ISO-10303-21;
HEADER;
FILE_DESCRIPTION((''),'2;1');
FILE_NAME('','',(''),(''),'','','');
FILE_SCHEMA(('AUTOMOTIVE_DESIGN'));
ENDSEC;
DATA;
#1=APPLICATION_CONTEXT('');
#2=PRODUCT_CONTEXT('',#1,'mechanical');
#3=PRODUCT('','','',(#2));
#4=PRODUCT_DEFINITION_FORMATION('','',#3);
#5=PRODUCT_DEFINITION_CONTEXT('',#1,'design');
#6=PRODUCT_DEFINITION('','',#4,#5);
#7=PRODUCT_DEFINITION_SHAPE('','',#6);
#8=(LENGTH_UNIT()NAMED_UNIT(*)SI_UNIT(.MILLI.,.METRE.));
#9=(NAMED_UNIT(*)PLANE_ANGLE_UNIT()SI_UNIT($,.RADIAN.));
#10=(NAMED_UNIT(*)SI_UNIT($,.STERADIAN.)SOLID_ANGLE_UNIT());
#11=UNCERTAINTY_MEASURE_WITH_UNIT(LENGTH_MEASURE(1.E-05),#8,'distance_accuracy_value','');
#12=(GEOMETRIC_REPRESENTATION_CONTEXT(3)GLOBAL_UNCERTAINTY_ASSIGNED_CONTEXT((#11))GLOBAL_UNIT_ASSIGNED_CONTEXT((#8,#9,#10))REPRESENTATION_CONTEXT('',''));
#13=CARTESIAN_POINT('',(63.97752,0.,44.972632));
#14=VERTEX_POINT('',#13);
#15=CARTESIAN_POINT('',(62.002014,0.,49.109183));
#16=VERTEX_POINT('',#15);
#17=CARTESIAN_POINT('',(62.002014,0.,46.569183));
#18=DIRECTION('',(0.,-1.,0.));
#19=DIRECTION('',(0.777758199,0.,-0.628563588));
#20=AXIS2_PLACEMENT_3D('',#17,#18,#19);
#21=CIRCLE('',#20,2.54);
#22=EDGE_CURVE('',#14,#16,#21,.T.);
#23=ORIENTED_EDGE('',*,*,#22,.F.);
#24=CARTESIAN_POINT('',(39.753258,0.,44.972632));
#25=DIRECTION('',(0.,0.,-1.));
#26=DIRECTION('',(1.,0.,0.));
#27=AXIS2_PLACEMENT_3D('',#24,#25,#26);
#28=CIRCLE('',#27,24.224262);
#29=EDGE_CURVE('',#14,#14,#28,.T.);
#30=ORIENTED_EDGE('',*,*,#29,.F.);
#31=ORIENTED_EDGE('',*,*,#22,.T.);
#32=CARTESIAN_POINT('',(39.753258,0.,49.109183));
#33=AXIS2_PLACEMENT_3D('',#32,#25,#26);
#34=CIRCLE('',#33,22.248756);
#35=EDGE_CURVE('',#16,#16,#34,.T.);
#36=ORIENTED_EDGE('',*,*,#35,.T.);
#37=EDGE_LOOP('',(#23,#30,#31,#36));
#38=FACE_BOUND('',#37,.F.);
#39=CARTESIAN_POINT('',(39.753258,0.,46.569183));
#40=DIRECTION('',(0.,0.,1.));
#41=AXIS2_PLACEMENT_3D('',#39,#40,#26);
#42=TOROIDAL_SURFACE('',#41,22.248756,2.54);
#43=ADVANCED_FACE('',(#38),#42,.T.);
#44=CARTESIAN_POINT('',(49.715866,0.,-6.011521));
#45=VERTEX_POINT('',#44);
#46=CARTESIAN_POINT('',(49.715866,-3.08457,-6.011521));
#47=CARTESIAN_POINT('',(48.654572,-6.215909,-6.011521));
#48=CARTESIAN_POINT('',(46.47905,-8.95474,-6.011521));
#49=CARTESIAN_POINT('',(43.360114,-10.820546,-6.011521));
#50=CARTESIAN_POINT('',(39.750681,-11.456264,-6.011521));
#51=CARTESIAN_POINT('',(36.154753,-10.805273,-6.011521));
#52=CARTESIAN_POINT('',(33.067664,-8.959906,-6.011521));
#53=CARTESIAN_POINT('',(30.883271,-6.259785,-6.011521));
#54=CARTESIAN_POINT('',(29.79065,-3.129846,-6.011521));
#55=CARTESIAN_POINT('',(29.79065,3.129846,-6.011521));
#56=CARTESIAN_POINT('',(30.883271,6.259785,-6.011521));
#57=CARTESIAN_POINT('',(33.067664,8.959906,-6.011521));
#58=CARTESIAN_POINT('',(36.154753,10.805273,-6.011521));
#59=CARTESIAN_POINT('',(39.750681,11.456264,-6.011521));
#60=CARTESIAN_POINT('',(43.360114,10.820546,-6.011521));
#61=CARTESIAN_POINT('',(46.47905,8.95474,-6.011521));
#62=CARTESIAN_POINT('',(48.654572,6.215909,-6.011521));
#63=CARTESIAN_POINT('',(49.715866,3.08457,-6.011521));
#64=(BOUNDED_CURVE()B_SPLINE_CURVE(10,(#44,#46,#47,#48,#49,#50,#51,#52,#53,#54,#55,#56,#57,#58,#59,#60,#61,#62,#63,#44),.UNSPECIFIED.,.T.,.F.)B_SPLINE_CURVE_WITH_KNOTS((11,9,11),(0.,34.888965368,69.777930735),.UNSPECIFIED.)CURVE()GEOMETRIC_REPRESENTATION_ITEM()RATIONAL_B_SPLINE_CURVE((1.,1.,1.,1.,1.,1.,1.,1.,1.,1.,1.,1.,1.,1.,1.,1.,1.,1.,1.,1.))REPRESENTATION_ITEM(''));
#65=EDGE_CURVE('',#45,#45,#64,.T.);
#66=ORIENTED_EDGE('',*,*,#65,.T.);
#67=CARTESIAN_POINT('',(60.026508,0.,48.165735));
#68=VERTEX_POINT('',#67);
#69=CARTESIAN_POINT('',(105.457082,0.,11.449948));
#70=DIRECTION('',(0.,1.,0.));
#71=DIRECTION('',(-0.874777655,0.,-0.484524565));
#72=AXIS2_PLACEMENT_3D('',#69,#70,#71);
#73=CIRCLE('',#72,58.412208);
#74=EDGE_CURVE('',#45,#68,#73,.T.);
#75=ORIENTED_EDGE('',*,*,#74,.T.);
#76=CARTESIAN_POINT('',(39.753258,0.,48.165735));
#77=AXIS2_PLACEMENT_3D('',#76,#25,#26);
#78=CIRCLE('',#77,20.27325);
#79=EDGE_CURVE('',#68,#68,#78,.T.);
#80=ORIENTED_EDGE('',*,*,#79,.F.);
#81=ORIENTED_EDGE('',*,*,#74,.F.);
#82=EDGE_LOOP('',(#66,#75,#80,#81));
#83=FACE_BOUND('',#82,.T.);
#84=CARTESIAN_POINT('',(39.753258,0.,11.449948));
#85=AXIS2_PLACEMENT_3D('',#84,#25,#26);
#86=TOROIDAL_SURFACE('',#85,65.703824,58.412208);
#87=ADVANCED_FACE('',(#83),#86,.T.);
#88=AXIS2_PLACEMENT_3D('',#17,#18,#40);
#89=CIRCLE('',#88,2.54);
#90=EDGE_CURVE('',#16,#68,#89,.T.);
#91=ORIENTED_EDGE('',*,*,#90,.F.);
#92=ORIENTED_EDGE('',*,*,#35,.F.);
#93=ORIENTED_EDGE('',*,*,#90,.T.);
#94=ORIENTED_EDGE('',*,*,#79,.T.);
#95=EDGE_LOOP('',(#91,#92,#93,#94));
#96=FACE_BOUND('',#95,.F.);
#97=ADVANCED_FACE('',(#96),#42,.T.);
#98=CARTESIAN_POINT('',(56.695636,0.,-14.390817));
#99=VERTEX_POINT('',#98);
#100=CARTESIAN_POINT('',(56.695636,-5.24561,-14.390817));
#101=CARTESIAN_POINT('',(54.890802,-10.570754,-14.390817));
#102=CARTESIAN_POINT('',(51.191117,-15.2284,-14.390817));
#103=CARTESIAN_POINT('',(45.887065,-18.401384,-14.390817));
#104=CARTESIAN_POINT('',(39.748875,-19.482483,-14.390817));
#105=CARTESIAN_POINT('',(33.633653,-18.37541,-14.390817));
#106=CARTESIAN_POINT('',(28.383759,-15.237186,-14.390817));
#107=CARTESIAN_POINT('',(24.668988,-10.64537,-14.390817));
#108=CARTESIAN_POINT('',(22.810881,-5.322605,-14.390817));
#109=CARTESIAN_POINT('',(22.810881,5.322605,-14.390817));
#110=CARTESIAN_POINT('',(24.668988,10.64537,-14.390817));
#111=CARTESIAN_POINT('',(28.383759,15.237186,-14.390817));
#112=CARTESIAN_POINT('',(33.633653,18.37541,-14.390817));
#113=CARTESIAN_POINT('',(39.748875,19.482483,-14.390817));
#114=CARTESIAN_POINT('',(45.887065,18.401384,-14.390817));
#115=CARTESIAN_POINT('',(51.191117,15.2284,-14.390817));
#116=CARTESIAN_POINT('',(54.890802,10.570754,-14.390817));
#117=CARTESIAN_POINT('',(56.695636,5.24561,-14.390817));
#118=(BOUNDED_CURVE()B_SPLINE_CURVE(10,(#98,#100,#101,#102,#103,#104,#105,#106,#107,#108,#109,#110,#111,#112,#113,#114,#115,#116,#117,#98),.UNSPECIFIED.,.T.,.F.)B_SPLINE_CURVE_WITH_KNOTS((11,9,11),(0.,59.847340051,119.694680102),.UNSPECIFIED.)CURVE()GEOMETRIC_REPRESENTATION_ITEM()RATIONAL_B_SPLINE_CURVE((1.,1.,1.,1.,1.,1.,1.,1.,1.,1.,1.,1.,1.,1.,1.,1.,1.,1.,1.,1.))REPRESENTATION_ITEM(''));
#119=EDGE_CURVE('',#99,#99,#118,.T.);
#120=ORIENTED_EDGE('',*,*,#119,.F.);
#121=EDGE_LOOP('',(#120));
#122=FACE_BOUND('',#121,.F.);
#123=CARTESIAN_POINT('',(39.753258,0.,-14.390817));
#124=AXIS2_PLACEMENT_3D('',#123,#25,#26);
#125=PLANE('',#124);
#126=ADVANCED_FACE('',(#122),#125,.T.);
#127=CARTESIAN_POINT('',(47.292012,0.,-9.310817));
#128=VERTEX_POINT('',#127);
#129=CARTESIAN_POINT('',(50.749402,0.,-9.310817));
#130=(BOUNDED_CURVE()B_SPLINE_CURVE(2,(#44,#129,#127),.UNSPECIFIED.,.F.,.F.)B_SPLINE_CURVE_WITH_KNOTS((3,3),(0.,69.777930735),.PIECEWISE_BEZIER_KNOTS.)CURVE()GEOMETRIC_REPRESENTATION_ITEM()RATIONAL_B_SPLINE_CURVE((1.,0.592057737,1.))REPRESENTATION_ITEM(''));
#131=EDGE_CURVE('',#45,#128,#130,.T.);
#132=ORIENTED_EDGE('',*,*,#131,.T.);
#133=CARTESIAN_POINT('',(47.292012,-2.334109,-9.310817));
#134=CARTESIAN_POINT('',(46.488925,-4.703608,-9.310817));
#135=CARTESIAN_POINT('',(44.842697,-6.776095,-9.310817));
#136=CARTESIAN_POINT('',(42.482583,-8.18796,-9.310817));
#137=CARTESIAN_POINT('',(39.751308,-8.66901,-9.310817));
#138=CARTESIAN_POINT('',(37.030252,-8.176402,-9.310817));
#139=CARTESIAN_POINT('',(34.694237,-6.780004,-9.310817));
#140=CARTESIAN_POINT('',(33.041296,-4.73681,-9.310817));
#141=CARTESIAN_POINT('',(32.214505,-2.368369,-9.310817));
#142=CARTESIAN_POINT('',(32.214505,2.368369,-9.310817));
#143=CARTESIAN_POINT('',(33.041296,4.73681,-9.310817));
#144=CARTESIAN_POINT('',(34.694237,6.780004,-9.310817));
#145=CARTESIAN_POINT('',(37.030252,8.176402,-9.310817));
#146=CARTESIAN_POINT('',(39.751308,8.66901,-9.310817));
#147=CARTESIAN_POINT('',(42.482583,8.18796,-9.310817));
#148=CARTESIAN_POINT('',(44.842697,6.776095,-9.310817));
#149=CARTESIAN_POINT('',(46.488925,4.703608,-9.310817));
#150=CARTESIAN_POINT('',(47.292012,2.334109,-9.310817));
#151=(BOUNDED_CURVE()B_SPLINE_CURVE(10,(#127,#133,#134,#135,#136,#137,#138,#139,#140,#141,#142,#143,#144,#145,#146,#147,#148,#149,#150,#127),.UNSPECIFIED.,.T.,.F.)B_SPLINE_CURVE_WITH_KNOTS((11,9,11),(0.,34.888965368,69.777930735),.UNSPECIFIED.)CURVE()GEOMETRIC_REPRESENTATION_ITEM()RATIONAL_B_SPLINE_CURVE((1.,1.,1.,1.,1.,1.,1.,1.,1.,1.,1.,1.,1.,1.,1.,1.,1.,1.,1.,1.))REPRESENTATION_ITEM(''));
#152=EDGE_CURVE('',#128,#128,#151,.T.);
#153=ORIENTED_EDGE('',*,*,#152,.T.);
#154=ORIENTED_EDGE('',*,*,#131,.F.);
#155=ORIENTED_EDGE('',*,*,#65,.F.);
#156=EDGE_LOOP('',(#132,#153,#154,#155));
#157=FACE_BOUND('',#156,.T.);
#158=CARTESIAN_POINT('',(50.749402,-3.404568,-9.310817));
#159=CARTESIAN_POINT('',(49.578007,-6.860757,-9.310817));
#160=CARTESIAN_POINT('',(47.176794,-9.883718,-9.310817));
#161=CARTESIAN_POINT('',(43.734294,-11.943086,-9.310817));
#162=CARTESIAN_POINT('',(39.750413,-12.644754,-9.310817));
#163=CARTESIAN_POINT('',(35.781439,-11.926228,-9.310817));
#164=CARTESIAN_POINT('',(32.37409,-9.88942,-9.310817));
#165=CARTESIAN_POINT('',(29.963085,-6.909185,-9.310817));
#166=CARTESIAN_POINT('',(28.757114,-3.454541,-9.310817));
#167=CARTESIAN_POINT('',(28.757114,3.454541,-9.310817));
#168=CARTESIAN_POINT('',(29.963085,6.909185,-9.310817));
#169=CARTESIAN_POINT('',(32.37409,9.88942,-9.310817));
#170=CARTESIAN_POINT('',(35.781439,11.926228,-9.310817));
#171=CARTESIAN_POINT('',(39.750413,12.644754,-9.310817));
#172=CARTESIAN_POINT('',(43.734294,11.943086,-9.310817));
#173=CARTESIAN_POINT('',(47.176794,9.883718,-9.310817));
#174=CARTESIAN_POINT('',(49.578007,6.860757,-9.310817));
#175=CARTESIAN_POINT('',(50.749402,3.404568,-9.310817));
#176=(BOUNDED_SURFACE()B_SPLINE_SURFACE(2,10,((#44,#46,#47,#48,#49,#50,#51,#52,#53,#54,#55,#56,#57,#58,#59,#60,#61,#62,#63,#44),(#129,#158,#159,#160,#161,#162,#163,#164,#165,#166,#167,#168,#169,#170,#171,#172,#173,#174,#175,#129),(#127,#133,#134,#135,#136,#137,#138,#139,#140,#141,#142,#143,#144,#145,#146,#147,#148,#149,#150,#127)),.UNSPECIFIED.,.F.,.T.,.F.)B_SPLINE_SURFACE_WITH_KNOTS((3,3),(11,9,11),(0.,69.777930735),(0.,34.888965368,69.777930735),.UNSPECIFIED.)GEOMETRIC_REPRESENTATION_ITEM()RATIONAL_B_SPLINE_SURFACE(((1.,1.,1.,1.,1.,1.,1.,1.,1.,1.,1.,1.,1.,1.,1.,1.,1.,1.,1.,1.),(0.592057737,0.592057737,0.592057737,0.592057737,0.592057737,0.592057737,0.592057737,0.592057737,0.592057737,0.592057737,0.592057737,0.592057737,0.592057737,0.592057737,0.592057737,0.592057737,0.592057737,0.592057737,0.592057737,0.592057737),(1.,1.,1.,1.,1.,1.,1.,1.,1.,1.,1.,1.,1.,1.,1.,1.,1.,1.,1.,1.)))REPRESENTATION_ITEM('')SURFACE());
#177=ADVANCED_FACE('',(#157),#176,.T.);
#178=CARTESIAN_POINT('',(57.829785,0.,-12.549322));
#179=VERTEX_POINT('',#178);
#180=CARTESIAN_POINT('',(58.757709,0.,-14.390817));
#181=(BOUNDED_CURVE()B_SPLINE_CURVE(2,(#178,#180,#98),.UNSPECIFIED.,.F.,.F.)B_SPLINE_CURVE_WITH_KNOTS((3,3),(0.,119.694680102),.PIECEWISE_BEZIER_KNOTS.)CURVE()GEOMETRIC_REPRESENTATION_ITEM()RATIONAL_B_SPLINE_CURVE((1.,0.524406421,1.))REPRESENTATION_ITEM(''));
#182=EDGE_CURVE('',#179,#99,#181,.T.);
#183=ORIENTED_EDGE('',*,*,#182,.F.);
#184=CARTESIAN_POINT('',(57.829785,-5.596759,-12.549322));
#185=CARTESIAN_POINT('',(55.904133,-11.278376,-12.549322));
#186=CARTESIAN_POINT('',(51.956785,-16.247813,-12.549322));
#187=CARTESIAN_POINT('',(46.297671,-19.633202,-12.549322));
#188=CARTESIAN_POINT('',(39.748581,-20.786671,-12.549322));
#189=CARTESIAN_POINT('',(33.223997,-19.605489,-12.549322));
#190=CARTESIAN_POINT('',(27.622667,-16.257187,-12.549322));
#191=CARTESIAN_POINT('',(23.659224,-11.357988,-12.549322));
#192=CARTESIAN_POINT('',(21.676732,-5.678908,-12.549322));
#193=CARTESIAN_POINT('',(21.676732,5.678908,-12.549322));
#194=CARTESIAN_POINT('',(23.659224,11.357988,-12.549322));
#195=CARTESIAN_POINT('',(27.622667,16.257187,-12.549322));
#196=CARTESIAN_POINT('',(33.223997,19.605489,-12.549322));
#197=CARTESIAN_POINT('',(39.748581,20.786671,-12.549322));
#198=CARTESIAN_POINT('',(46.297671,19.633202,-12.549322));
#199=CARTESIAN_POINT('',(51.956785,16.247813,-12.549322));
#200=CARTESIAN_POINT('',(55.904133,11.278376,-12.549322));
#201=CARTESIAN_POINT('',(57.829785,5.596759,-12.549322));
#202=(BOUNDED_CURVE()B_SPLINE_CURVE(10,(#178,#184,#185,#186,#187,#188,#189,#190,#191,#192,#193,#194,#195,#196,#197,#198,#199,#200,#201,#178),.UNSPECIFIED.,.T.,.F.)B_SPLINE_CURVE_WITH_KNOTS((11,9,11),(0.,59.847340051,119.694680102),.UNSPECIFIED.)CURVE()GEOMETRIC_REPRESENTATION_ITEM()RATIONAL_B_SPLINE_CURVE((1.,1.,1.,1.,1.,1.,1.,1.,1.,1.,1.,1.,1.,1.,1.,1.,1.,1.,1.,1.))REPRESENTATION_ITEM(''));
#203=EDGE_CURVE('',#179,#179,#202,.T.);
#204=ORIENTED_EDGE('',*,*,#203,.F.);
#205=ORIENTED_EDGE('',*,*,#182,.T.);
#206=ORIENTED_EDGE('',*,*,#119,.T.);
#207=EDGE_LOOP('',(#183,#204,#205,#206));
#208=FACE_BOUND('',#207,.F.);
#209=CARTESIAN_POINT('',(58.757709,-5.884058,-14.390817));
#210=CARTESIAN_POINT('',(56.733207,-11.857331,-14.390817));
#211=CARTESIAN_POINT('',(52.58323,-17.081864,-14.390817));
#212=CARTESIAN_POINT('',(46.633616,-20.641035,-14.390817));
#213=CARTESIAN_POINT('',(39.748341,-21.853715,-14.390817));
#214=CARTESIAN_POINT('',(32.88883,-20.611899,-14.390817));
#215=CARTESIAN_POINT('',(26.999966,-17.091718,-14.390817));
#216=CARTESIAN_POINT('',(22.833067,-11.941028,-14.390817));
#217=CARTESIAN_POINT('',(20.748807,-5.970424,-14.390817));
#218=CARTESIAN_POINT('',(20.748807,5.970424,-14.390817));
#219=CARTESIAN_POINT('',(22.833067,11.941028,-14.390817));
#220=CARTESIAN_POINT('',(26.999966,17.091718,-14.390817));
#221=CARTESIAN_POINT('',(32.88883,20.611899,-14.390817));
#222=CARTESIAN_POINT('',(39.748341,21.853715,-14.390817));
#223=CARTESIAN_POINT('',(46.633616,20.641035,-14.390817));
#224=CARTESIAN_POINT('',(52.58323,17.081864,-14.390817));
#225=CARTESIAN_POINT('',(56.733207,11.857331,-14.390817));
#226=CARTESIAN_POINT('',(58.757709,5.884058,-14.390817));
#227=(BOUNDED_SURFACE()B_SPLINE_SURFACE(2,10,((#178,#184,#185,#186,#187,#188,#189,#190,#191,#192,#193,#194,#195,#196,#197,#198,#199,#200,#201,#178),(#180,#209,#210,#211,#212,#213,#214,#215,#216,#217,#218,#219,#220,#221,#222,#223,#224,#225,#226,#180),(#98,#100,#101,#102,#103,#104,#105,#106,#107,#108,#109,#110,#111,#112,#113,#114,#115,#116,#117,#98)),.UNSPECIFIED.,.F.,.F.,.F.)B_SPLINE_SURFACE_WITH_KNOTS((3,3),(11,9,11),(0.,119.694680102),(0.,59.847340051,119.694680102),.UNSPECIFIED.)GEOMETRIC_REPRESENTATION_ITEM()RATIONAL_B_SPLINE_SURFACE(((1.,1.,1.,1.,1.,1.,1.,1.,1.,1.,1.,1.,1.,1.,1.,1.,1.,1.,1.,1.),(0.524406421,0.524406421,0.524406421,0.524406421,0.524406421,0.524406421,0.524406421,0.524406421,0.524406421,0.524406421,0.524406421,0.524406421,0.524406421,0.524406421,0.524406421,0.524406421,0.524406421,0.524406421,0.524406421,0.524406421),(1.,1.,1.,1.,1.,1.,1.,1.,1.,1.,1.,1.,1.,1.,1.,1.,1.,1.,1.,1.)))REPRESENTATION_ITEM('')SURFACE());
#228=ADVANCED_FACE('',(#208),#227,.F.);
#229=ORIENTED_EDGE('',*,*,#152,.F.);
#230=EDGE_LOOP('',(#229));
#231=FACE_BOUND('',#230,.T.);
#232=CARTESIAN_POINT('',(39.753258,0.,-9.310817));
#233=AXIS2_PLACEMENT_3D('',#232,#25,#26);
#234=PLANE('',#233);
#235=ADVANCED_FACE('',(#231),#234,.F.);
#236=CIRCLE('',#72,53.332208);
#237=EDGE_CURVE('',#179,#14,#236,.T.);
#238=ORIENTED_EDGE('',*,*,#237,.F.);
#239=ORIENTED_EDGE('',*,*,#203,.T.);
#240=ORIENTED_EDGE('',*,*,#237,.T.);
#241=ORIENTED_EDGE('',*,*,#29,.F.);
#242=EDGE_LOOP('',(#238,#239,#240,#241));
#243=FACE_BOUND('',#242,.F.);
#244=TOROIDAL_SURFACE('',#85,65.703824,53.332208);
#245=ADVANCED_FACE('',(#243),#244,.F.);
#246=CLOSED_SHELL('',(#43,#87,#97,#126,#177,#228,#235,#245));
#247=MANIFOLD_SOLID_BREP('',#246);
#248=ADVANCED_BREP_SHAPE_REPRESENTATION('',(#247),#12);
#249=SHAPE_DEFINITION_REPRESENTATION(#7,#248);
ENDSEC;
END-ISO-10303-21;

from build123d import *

# Parameters (mm, degrees)
F2_T = -5.08
F4_R = 2.54
F5_R = 1.27


# Not quite as in the source:
# - a fillet or chamfer that OpenCascade refuses, or shapes differently, is made with other operations: its cross-section is extruded or revolved along the edge and cut away or added


with BuildPart() as f1:
    # F0 (on Front) → F1 (revolve)
    with BuildSketch(Plane.XZ):
        with BuildLine():
            Line((67.6932582283, 49.1091830879), (39.7532582283, 49.1091830879))
            Line((39.7532582283, 49.1091830879), (39.7532582283, -14.3908169121))
            Line((39.7532582283, -14.3908169121), (58.8032582283, -14.3908169121))
            ThreePointArc((58.8032582283, -14.3908169121), (52.6399701012, 18.8443434257), (67.6932582283, 49.1091830879))
        make_face()
    revolve(axis=Axis((39.7532582283, 0, 17.3591830879), (0, 0, -1)))

    # F2
    f2_openings = [f1.faces().sort_by_distance(p)[0] for p in [
        (39.753258, 0, 49.109183),
    ]]
    offset(amount=F2_T, openings=f2_openings)

    # F3: fillet of radius 2.54 on 2 edges, made by hand

    # F3_s1 → F3_t2 (revolve, cut)
    with BuildSketch(Plane.XZ):
        with BuildLine():
            ThreePointArc((62.0020141866, 49.1091830879), (60.9074002922, 48.8612172112), (60.0265083615, 48.1657346014))
            ThreePointArc((60.0265083615, 48.1657346014), (60.413510259, 48.6394982972), (60.805452481, 49.1091830879))
            Line((60.805452481, 49.1091830879), (62.0020141866, 49.1091830879))
        make_face()
    revolve(axis=Axis((39.7532582283, 0, 49.1091830879), (0, 0, -1)), mode=Mode.SUBTRACT)

    # F3_s3 → F3_t4 (revolve, cut)
    with BuildSketch(Plane.XZ):
        with BuildLine():
            ThreePointArc((63.9775200117, 44.9726315745), (64.2940483099, 47.6637969824), (62.0020141866, 49.1091830879))
            Line((62.0020141866, 49.1091830879), (67.6932582283, 49.1091830879))
            ThreePointArc((67.6932582283, 49.1091830879), (65.7814432363, 47.0893652753), (63.9775200117, 44.9726315745))
        make_face()
    revolve(axis=Axis((39.7532582283, 0, 49.1091830879), (0, 0, -1)), mode=Mode.SUBTRACT)

    # F4
    f4_edges = [f1.edges().sort_by_distance(p)[0] for p in [
        (28.647756, 0, -9.310817),
    ]]
    fillet(f4_edges, radius=F4_R)

    # F5
    f5_edges = [f1.edges().sort_by_distance(p)[0] for p in [
        (20.703258, 0, -14.390817),
    ]]
    fillet(f5_edges, radius=F5_R)


solid = f1.part
